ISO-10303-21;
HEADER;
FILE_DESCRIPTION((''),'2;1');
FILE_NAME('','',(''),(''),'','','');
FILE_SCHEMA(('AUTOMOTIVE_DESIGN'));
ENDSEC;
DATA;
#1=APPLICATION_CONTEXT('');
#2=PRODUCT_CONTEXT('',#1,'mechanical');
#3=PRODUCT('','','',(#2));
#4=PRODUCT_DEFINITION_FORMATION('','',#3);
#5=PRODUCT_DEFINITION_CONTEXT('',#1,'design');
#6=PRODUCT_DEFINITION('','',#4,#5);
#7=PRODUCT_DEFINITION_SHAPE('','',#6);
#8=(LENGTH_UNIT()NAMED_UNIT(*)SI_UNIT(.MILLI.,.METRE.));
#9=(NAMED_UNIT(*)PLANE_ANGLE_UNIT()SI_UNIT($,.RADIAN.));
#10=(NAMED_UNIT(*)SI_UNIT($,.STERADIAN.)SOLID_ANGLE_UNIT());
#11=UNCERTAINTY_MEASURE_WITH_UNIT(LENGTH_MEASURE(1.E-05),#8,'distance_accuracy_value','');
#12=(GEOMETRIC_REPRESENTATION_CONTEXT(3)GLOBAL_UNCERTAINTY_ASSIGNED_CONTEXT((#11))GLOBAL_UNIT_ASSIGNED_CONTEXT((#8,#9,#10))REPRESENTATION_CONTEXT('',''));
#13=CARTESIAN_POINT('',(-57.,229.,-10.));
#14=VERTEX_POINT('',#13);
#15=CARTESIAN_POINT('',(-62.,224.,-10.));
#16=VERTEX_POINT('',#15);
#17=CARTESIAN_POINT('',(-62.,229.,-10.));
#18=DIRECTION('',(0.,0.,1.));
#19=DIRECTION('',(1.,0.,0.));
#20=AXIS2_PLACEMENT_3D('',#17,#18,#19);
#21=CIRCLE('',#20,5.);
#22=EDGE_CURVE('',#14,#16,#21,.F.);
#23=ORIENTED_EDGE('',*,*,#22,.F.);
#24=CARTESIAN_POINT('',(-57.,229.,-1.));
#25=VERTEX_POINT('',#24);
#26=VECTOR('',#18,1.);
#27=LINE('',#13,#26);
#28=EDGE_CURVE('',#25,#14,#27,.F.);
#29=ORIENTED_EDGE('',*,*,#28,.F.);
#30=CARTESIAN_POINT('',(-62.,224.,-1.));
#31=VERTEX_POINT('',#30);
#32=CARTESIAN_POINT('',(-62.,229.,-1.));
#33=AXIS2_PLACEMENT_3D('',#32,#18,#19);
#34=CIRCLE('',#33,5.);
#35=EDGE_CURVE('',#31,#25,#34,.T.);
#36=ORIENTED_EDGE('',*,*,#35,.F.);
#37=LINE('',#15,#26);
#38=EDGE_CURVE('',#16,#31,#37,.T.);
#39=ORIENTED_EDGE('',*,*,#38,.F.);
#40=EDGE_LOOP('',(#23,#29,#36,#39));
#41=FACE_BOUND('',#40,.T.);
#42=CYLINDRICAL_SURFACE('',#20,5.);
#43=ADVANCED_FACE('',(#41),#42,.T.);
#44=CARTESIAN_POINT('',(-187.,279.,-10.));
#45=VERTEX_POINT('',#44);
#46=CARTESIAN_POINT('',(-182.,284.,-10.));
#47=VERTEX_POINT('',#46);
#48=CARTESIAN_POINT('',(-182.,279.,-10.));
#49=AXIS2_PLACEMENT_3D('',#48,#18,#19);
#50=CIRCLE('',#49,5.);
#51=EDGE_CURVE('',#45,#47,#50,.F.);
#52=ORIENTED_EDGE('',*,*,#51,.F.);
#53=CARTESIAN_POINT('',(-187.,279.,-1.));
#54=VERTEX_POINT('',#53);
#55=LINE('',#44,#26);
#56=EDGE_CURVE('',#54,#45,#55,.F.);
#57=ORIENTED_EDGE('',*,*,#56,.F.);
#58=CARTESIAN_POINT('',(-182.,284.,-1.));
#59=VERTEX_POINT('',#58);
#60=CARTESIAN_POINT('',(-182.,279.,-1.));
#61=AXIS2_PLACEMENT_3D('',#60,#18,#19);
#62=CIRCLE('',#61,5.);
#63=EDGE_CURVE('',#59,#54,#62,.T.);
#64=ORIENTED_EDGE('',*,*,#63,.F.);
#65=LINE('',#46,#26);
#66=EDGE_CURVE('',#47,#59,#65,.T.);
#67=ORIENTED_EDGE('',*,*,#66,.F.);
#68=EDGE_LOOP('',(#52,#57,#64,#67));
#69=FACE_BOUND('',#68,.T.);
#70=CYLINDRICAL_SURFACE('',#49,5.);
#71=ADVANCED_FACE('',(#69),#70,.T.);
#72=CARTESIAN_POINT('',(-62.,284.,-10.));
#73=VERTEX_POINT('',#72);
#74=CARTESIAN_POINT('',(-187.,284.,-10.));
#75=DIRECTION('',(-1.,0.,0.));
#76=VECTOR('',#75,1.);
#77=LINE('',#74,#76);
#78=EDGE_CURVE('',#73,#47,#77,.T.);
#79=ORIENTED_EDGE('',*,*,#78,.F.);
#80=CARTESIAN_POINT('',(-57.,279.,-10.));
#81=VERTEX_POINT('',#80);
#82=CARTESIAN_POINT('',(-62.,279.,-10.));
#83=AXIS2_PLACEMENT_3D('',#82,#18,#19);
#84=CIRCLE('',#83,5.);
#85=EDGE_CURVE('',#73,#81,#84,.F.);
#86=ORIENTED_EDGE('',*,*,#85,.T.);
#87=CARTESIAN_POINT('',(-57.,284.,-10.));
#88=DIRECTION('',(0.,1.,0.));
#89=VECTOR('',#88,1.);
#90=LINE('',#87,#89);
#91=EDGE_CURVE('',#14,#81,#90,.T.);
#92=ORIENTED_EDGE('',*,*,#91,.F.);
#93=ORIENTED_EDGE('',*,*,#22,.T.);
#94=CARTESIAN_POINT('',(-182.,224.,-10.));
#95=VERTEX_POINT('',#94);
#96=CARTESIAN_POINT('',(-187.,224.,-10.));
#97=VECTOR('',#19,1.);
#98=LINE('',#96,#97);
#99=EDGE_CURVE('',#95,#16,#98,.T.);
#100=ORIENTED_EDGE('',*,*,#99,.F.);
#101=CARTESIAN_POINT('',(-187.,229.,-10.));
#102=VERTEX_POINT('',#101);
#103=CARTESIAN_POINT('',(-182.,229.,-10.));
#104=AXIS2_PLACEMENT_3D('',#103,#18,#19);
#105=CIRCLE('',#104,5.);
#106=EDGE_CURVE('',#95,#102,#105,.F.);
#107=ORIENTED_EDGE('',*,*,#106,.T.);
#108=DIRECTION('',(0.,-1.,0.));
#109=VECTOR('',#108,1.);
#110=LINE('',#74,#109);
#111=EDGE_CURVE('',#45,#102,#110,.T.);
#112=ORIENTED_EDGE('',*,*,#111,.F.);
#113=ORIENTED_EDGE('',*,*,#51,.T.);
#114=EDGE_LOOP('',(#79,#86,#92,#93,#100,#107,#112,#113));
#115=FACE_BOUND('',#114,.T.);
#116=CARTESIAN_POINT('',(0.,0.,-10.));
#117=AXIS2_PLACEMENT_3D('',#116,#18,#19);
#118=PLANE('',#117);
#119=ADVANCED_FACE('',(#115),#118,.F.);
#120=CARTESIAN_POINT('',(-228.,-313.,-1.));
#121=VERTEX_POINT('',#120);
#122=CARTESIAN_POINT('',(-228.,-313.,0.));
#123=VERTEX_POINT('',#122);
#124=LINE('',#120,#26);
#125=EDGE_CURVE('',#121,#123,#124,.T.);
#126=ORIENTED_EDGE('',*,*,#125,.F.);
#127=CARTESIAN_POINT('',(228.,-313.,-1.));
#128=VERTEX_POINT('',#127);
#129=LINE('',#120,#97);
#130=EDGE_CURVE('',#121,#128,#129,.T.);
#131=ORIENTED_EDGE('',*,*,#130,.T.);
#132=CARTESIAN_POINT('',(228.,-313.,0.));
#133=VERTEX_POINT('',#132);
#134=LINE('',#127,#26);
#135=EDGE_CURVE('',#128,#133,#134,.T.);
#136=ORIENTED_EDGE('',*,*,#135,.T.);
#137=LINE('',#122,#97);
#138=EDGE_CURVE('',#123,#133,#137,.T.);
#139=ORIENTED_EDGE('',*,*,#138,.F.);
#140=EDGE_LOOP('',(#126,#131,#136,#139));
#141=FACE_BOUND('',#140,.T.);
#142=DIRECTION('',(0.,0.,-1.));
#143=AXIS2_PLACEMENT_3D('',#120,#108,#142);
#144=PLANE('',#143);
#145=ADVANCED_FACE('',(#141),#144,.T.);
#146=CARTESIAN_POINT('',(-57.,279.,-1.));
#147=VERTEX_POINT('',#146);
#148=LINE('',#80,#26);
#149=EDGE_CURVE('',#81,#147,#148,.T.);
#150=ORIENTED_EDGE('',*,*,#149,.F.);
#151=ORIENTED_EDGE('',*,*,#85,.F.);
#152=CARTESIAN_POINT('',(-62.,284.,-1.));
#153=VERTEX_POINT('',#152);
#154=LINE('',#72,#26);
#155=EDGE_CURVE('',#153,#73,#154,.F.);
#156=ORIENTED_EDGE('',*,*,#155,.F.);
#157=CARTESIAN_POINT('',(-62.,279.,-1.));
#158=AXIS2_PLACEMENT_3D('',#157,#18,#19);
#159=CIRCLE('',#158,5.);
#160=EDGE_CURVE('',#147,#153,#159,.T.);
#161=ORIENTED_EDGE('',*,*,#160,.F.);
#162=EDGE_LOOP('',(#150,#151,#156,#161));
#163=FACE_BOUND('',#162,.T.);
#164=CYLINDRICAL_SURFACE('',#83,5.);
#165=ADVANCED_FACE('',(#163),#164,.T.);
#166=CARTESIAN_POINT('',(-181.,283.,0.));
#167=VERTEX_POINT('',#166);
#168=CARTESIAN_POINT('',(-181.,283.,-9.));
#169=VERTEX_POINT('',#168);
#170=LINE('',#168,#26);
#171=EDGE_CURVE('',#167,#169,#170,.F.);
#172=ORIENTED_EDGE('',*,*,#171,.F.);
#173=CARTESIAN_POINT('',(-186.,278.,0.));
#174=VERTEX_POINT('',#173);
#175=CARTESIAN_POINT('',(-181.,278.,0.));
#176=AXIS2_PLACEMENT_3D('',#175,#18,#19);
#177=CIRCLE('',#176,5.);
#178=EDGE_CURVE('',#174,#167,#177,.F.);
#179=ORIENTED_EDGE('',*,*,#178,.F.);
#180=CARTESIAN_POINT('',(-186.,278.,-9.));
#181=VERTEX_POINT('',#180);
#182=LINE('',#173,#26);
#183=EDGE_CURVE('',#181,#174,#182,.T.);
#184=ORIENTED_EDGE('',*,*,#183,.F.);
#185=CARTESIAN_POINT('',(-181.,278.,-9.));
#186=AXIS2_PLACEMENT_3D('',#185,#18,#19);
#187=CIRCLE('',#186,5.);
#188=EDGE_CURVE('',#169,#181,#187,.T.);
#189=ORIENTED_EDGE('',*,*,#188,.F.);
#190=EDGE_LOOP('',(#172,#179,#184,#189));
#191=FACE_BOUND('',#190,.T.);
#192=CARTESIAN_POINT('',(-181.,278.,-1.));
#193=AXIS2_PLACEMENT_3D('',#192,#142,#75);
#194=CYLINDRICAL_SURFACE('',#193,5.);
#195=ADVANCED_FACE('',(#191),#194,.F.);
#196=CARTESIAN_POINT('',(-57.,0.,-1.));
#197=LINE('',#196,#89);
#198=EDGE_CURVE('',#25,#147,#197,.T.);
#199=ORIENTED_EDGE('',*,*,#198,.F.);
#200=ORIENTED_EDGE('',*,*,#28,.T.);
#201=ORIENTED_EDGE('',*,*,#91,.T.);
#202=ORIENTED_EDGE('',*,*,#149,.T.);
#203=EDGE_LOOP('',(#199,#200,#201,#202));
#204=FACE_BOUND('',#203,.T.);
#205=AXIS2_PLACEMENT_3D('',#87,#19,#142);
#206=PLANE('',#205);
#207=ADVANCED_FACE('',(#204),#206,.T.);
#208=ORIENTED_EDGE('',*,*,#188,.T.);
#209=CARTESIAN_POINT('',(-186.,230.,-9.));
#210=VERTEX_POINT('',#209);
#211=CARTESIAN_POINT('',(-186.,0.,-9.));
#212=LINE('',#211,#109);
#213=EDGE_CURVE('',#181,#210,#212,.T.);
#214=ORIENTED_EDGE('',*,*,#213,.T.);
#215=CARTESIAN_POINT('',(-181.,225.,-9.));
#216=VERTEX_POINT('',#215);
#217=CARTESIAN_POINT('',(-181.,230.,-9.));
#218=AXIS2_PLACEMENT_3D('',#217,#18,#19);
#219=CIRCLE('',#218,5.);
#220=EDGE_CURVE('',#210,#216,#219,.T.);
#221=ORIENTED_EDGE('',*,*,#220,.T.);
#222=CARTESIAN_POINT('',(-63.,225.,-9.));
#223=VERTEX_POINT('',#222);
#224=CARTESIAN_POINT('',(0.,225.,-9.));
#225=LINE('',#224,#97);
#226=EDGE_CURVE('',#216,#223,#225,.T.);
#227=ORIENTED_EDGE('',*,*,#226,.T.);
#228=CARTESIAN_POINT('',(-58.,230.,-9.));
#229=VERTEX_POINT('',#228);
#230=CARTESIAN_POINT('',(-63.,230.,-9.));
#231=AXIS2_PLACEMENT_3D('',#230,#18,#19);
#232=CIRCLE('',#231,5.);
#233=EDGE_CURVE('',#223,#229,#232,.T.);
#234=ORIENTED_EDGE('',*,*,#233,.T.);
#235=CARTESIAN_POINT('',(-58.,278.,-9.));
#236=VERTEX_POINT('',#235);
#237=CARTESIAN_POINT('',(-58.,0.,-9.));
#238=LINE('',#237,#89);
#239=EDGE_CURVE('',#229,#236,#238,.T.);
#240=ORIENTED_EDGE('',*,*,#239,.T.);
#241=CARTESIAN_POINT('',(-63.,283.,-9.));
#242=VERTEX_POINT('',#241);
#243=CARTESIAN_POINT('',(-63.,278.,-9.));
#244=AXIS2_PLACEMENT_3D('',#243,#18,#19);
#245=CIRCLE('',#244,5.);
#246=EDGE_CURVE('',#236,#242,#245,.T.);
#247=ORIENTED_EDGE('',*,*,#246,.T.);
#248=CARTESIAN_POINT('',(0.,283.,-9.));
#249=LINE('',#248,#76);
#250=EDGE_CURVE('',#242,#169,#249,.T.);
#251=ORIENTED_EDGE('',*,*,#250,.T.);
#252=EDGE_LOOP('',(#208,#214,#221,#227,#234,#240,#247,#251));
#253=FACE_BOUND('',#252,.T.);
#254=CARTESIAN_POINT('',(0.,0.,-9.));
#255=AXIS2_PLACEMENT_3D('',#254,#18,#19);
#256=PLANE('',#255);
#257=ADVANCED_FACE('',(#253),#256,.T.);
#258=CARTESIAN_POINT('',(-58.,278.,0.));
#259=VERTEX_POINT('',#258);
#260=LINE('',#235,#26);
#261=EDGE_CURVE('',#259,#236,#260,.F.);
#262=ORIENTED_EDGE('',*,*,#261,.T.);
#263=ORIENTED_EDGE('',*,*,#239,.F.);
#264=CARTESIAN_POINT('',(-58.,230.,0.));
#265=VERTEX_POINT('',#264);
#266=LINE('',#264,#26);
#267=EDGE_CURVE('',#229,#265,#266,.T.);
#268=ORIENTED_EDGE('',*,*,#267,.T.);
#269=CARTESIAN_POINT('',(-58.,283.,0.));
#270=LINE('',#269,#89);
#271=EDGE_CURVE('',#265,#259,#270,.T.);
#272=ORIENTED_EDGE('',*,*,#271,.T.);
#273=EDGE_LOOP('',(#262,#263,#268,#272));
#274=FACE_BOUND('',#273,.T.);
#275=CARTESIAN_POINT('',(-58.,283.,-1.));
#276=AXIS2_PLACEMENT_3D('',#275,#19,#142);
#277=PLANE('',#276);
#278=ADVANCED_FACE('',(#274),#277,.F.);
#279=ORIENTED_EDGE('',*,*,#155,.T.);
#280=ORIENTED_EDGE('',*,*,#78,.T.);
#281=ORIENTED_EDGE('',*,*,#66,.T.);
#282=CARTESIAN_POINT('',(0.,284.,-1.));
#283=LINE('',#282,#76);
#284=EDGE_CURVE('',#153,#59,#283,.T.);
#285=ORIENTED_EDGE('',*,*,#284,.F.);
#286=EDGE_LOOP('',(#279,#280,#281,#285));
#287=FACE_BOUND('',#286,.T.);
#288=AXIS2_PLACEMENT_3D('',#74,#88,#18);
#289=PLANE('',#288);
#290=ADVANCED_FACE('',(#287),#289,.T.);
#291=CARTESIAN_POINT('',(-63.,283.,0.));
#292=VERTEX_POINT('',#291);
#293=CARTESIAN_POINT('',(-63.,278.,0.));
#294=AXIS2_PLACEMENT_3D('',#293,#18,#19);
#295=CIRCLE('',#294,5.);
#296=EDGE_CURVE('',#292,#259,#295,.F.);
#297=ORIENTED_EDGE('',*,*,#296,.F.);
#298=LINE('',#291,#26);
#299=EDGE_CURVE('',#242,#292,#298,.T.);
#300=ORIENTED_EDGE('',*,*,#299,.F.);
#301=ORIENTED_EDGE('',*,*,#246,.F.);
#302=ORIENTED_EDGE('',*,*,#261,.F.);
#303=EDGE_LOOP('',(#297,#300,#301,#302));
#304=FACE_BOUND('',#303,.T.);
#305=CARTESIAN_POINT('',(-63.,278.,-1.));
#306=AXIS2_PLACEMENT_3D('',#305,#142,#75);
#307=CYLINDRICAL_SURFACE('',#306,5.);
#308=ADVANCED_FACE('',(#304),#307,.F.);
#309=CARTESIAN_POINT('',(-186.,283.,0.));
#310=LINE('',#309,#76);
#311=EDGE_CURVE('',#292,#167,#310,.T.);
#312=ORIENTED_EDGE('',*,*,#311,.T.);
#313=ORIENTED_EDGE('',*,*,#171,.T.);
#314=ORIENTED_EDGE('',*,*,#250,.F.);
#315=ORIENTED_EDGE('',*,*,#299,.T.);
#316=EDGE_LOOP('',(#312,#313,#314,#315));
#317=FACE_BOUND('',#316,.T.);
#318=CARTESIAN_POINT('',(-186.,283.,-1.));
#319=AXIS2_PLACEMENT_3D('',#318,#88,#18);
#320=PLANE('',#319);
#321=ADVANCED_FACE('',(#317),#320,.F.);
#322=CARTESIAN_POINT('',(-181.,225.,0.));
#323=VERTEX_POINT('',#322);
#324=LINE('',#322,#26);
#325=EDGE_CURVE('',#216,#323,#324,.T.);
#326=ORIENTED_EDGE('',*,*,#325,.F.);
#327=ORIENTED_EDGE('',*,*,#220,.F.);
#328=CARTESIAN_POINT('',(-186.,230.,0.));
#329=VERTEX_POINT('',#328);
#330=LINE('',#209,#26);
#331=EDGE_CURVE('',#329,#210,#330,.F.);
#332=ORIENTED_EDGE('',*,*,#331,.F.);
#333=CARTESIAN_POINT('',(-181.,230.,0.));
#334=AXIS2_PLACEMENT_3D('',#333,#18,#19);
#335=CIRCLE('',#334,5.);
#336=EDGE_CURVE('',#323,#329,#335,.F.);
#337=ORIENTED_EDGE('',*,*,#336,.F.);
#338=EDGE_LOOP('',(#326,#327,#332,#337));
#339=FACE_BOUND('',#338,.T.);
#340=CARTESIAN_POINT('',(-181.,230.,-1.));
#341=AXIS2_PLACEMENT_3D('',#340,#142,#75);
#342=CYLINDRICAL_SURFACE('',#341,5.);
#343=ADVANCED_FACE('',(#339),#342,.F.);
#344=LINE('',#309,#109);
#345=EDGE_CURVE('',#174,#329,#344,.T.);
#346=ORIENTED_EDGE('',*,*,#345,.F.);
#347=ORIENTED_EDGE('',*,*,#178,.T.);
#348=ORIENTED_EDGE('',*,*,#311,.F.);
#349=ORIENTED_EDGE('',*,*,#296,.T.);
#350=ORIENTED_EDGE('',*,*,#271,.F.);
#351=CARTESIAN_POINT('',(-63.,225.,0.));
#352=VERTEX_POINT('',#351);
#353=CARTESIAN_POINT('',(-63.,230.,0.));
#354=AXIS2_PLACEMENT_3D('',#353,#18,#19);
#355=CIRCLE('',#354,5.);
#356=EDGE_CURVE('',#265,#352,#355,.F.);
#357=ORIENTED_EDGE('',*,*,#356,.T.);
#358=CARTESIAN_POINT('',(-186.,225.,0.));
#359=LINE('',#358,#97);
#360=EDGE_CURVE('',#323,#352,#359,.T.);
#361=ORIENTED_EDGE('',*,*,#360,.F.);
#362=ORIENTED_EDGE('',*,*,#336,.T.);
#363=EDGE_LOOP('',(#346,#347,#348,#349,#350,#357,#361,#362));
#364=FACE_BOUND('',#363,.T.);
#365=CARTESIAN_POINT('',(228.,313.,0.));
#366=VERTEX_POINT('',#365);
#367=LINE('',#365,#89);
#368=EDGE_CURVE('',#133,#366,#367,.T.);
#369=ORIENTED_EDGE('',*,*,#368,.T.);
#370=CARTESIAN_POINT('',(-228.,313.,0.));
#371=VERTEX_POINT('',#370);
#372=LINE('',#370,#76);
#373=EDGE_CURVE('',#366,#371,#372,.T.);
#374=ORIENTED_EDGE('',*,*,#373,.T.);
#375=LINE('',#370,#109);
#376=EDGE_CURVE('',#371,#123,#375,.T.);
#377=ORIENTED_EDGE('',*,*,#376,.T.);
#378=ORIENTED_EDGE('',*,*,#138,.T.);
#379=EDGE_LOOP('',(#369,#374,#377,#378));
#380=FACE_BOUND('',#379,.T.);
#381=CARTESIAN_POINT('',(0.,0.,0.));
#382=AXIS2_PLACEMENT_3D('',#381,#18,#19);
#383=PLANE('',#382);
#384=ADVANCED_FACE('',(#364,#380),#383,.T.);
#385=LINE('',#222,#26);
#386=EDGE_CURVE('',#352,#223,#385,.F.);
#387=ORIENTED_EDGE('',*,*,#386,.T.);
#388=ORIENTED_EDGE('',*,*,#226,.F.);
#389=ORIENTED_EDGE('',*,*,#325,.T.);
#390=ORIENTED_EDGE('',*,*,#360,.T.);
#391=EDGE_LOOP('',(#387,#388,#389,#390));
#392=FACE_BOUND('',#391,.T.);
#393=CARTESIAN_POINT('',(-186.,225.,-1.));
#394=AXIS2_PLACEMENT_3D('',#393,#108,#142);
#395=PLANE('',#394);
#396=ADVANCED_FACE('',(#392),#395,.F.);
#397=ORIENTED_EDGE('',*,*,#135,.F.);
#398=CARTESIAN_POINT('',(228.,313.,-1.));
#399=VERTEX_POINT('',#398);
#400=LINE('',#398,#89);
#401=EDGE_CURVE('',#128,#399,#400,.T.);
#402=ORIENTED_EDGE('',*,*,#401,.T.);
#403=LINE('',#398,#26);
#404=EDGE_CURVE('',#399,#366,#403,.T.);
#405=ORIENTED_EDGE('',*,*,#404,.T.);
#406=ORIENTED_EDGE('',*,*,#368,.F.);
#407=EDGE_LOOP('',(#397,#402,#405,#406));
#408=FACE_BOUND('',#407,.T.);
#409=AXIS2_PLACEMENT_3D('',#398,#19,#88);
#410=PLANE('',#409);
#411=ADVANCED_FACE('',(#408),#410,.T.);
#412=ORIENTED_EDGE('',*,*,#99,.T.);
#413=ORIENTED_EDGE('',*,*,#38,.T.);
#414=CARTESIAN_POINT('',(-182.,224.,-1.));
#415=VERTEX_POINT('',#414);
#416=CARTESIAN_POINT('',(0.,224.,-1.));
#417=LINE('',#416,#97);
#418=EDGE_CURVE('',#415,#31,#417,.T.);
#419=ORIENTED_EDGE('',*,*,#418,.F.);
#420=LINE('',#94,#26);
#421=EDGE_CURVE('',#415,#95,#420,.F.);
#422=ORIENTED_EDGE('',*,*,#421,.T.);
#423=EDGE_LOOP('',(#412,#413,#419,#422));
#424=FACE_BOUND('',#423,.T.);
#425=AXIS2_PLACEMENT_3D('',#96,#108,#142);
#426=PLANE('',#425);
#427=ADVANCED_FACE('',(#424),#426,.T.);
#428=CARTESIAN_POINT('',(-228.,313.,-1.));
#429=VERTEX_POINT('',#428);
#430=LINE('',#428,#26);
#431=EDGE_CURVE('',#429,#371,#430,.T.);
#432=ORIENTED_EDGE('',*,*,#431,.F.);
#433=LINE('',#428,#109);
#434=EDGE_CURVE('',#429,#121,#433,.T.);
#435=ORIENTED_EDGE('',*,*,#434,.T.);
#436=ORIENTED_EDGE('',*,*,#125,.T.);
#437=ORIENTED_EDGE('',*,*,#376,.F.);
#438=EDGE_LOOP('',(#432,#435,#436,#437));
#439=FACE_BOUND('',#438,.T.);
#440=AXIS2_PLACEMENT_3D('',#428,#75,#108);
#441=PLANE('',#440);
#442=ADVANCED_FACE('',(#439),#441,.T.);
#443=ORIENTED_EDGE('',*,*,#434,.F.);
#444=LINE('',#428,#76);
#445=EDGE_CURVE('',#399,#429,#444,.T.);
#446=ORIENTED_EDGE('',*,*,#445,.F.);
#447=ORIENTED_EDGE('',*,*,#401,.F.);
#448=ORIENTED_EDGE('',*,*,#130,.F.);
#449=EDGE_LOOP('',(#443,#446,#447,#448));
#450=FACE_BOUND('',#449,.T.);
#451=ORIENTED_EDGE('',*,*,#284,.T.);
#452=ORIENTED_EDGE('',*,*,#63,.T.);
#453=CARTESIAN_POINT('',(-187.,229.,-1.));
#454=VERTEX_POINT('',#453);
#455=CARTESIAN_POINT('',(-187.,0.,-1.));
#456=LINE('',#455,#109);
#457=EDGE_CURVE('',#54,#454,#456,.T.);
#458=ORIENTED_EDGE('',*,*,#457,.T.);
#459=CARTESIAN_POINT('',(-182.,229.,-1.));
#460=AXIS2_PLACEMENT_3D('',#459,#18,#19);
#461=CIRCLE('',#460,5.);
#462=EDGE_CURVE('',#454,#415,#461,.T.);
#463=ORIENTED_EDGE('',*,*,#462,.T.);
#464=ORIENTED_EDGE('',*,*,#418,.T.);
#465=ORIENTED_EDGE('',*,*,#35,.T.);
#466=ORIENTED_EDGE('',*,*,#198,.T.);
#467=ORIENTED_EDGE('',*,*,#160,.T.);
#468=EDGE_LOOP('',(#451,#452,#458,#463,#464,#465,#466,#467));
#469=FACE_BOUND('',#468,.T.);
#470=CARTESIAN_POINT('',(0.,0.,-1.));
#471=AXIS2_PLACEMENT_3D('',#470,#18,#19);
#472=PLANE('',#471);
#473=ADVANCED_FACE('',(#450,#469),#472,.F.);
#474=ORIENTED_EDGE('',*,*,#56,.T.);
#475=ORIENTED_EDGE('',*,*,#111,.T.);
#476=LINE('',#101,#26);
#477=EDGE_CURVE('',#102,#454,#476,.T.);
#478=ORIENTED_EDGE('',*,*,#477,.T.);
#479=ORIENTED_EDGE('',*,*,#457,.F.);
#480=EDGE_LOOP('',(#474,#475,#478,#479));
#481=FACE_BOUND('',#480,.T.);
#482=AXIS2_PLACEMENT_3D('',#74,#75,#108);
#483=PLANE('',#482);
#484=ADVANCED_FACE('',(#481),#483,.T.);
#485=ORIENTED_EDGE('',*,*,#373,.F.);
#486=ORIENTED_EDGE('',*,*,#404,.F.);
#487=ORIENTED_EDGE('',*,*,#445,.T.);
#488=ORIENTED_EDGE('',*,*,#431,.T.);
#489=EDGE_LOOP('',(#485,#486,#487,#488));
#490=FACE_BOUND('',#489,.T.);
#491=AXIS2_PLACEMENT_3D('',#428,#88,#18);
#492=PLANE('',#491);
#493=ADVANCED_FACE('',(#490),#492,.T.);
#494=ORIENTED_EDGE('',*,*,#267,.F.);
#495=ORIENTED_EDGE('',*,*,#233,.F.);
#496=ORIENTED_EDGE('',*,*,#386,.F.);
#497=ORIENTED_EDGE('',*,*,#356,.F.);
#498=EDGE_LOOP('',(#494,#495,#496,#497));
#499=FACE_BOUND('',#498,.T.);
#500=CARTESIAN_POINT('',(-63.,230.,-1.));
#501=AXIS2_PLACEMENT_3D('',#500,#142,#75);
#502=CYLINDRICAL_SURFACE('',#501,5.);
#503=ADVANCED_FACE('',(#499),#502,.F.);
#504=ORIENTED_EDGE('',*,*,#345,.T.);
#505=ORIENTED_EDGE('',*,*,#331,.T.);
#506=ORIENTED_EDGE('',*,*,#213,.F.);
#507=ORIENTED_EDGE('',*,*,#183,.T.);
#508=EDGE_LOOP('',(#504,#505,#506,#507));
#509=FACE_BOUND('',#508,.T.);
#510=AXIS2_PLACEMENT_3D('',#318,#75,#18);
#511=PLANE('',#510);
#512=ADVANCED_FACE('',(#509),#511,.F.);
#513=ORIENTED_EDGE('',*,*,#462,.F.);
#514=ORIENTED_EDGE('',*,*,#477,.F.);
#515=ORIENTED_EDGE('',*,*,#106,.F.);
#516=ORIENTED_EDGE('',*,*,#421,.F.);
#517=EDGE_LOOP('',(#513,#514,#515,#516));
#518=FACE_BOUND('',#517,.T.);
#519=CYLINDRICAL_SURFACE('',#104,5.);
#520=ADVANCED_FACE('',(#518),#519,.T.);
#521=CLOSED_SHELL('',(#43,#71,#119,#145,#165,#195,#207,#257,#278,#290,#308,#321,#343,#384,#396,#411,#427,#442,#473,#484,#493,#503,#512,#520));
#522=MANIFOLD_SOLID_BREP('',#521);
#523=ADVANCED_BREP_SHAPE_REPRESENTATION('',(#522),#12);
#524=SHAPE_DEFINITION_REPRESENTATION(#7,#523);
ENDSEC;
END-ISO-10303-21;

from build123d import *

# Parameters (mm, degrees)
SKETCH1_W           = 456
SKETCH1_H           = 626
BASE_FLANGE1_DEPTH  = 1
SKETCH6_W           = 130
SKETCH6_H           = 60
BOSS_EXTRUDE1_DEPTH = 10
SKETCH7_W           = 128
SKETCH7_H           = 58
CUT_EXTRUDE2_DEPTH  = 1
SHELL2_START        = -186
SHELL2_OUTLINE_W    = 58
SHELL2_OUTLINE_H    = 8
SHELL2_DEPTH        = 128
FILLET1_R           = 5


# Read off the part's stored shape, not the designer's step: Shell2
# Sheet-metal steps are written as plain solids
with BuildPart() as part:
    # Sketch1 → Base-Flange1 (new body)
    with BuildSketch(Plane.XY):
        Rectangle(SKETCH1_W, SKETCH1_H)
    extrude(amount=-BASE_FLANGE1_DEPTH)

    # Sketch6 → Boss-Extrude1 (add)
    with BuildSketch(Plane.XY):
        with Locations((-122, 254)):
            Rectangle(SKETCH6_W, SKETCH6_H)
    extrude(amount=-BOSS_EXTRUDE1_DEPTH)

    # Sketch7 → Cut-Extrude2 (cut)
    with BuildSketch(Plane.XY):
        with Locations((-122, 254)):
            Rectangle(SKETCH7_W, SKETCH7_H)
    extrude(amount=-CUT_EXTRUDE2_DEPTH, mode=Mode.SUBTRACT)

    # Shell2 outline → Shell2 (cut)
    with BuildSketch(Plane.YZ.offset(SHELL2_START)):
        with Locations((254, -5)):
            Rectangle(SHELL2_OUTLINE_W, SHELL2_OUTLINE_H)
    extrude(amount=SHELL2_DEPTH, mode=Mode.SUBTRACT)

    # Fillet1
    fillet1_edges = [part.edges().sort_by_distance(p)[0] for p in [
        (-57, 284, -5.5),
        (-57, 224, -5.5),
        (-187, 224, -5.5),
        (-187, 284, -5.5),
        (-186, 225, -4.5),
        (-186, 283, -4.5),
        (-58, 283, -4.5),
        (-58, 225, -4.5),
    ]]
    fillet(fillet1_edges, radius=FILLET1_R)


solid = part.part
